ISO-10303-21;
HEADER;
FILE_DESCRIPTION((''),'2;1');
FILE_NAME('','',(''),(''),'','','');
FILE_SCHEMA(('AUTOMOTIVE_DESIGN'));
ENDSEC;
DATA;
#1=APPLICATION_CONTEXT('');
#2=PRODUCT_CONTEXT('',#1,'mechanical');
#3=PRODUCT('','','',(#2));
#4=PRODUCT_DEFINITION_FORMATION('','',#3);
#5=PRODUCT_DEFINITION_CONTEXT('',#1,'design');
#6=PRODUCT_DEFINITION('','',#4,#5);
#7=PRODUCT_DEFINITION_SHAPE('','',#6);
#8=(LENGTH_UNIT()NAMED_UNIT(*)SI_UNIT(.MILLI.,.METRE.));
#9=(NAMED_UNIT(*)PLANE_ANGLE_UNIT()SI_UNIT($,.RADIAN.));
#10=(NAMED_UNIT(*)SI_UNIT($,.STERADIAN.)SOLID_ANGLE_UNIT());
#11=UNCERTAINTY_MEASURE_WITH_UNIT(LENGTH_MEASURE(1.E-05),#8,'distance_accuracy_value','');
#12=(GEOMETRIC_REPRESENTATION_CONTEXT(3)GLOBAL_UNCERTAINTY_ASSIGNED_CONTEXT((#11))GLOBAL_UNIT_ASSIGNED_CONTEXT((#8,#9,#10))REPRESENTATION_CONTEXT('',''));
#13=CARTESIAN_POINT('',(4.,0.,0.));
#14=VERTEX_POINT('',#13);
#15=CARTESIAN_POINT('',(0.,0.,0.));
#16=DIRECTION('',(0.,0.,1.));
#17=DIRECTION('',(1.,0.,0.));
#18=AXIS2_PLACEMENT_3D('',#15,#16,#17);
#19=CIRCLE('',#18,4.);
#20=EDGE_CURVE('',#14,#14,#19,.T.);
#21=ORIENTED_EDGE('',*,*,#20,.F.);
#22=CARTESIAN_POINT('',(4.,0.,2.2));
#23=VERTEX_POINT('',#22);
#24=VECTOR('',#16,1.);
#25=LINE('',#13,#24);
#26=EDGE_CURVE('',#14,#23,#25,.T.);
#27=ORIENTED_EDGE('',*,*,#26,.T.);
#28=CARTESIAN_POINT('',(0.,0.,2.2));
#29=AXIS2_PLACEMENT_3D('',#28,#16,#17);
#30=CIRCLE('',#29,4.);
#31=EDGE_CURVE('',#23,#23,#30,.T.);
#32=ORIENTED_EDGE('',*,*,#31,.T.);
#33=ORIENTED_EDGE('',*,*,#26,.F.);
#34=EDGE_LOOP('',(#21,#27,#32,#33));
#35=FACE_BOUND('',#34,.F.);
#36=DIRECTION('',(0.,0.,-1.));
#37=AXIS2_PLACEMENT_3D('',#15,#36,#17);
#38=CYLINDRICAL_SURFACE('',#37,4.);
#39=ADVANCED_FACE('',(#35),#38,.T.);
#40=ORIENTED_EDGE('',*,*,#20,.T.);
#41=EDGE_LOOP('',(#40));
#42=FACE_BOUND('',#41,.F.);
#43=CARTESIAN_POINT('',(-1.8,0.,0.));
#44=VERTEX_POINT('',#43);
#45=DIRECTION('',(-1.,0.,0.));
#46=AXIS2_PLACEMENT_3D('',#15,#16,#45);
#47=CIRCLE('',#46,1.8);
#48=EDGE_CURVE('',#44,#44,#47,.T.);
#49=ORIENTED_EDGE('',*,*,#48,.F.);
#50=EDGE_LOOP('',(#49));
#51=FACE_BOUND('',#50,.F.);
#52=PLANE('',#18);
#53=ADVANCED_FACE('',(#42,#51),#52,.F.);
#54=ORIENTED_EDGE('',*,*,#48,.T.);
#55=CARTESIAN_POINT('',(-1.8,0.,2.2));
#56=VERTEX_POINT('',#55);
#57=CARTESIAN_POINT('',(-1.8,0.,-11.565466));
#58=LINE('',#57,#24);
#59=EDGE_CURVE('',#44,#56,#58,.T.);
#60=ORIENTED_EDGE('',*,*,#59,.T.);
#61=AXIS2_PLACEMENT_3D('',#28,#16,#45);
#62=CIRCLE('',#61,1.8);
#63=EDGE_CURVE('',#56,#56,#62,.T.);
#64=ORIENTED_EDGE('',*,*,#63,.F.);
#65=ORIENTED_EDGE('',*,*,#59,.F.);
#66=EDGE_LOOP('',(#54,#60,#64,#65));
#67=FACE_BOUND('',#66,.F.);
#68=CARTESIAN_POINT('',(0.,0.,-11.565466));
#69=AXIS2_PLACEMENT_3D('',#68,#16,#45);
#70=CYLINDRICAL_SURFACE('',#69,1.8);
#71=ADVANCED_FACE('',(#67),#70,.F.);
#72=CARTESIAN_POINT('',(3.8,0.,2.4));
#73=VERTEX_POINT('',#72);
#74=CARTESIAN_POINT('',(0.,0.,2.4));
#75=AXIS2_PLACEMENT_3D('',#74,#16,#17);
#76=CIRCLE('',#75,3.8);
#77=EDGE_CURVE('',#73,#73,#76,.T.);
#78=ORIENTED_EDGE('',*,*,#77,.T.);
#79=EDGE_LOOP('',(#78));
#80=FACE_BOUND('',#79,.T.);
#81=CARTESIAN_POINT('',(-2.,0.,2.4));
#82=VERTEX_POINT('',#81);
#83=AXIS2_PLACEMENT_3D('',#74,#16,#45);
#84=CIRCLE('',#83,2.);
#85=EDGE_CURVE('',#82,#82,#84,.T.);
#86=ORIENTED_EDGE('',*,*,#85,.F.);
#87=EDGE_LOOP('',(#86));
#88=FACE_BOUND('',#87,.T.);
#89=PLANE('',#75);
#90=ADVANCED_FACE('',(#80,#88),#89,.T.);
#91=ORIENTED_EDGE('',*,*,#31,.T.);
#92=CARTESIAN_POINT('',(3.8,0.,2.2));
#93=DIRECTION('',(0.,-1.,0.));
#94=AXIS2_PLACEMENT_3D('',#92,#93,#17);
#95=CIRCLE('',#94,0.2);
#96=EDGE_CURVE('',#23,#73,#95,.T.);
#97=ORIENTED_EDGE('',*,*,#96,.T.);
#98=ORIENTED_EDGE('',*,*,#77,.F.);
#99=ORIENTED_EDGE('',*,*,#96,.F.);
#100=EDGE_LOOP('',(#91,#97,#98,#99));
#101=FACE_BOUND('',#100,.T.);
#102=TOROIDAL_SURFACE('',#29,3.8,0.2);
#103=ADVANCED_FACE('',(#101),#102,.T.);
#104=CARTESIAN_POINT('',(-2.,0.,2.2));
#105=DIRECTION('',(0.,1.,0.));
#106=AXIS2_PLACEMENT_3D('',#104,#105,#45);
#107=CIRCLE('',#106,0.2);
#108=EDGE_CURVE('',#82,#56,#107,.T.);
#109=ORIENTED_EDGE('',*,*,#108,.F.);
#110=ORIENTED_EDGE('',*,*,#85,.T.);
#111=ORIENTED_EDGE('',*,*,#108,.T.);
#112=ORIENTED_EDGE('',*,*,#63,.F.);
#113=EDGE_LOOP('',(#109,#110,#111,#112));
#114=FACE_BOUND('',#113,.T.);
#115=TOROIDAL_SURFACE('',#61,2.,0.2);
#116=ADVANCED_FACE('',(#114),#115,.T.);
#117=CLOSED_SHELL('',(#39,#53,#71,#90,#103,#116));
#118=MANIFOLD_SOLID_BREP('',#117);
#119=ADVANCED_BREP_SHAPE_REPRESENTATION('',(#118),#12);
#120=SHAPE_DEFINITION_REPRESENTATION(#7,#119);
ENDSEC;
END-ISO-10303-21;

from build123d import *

# Parameters (mm, degrees)
F0_R     = 4
F1_DEPTH = 2.4
F2_D     = 3.6
F3_R     = 0.2


with BuildPart() as f1:
    # F0 (on Top) → F1 (new body)
    with BuildSketch(Plane.XY):
        Circle(F0_R)
    extrude(amount=F1_DEPTH)

    # F2 (through all)
    with Locations(Plane(origin=(0, 0, 0), x_dir=(1, 0, 0), z_dir=(0, 0, -1))):
        with Locations((0, 0)):
            Hole(F2_D / 2)

    # F3
    f3_edges = [f1.edges().sort_by_distance(p)[0] for p in [
        (-4, 0, 2.4),
        (-1.8, 0, 2.4),
    ]]
    fillet(f3_edges, radius=F3_R)


solid = f1.part
